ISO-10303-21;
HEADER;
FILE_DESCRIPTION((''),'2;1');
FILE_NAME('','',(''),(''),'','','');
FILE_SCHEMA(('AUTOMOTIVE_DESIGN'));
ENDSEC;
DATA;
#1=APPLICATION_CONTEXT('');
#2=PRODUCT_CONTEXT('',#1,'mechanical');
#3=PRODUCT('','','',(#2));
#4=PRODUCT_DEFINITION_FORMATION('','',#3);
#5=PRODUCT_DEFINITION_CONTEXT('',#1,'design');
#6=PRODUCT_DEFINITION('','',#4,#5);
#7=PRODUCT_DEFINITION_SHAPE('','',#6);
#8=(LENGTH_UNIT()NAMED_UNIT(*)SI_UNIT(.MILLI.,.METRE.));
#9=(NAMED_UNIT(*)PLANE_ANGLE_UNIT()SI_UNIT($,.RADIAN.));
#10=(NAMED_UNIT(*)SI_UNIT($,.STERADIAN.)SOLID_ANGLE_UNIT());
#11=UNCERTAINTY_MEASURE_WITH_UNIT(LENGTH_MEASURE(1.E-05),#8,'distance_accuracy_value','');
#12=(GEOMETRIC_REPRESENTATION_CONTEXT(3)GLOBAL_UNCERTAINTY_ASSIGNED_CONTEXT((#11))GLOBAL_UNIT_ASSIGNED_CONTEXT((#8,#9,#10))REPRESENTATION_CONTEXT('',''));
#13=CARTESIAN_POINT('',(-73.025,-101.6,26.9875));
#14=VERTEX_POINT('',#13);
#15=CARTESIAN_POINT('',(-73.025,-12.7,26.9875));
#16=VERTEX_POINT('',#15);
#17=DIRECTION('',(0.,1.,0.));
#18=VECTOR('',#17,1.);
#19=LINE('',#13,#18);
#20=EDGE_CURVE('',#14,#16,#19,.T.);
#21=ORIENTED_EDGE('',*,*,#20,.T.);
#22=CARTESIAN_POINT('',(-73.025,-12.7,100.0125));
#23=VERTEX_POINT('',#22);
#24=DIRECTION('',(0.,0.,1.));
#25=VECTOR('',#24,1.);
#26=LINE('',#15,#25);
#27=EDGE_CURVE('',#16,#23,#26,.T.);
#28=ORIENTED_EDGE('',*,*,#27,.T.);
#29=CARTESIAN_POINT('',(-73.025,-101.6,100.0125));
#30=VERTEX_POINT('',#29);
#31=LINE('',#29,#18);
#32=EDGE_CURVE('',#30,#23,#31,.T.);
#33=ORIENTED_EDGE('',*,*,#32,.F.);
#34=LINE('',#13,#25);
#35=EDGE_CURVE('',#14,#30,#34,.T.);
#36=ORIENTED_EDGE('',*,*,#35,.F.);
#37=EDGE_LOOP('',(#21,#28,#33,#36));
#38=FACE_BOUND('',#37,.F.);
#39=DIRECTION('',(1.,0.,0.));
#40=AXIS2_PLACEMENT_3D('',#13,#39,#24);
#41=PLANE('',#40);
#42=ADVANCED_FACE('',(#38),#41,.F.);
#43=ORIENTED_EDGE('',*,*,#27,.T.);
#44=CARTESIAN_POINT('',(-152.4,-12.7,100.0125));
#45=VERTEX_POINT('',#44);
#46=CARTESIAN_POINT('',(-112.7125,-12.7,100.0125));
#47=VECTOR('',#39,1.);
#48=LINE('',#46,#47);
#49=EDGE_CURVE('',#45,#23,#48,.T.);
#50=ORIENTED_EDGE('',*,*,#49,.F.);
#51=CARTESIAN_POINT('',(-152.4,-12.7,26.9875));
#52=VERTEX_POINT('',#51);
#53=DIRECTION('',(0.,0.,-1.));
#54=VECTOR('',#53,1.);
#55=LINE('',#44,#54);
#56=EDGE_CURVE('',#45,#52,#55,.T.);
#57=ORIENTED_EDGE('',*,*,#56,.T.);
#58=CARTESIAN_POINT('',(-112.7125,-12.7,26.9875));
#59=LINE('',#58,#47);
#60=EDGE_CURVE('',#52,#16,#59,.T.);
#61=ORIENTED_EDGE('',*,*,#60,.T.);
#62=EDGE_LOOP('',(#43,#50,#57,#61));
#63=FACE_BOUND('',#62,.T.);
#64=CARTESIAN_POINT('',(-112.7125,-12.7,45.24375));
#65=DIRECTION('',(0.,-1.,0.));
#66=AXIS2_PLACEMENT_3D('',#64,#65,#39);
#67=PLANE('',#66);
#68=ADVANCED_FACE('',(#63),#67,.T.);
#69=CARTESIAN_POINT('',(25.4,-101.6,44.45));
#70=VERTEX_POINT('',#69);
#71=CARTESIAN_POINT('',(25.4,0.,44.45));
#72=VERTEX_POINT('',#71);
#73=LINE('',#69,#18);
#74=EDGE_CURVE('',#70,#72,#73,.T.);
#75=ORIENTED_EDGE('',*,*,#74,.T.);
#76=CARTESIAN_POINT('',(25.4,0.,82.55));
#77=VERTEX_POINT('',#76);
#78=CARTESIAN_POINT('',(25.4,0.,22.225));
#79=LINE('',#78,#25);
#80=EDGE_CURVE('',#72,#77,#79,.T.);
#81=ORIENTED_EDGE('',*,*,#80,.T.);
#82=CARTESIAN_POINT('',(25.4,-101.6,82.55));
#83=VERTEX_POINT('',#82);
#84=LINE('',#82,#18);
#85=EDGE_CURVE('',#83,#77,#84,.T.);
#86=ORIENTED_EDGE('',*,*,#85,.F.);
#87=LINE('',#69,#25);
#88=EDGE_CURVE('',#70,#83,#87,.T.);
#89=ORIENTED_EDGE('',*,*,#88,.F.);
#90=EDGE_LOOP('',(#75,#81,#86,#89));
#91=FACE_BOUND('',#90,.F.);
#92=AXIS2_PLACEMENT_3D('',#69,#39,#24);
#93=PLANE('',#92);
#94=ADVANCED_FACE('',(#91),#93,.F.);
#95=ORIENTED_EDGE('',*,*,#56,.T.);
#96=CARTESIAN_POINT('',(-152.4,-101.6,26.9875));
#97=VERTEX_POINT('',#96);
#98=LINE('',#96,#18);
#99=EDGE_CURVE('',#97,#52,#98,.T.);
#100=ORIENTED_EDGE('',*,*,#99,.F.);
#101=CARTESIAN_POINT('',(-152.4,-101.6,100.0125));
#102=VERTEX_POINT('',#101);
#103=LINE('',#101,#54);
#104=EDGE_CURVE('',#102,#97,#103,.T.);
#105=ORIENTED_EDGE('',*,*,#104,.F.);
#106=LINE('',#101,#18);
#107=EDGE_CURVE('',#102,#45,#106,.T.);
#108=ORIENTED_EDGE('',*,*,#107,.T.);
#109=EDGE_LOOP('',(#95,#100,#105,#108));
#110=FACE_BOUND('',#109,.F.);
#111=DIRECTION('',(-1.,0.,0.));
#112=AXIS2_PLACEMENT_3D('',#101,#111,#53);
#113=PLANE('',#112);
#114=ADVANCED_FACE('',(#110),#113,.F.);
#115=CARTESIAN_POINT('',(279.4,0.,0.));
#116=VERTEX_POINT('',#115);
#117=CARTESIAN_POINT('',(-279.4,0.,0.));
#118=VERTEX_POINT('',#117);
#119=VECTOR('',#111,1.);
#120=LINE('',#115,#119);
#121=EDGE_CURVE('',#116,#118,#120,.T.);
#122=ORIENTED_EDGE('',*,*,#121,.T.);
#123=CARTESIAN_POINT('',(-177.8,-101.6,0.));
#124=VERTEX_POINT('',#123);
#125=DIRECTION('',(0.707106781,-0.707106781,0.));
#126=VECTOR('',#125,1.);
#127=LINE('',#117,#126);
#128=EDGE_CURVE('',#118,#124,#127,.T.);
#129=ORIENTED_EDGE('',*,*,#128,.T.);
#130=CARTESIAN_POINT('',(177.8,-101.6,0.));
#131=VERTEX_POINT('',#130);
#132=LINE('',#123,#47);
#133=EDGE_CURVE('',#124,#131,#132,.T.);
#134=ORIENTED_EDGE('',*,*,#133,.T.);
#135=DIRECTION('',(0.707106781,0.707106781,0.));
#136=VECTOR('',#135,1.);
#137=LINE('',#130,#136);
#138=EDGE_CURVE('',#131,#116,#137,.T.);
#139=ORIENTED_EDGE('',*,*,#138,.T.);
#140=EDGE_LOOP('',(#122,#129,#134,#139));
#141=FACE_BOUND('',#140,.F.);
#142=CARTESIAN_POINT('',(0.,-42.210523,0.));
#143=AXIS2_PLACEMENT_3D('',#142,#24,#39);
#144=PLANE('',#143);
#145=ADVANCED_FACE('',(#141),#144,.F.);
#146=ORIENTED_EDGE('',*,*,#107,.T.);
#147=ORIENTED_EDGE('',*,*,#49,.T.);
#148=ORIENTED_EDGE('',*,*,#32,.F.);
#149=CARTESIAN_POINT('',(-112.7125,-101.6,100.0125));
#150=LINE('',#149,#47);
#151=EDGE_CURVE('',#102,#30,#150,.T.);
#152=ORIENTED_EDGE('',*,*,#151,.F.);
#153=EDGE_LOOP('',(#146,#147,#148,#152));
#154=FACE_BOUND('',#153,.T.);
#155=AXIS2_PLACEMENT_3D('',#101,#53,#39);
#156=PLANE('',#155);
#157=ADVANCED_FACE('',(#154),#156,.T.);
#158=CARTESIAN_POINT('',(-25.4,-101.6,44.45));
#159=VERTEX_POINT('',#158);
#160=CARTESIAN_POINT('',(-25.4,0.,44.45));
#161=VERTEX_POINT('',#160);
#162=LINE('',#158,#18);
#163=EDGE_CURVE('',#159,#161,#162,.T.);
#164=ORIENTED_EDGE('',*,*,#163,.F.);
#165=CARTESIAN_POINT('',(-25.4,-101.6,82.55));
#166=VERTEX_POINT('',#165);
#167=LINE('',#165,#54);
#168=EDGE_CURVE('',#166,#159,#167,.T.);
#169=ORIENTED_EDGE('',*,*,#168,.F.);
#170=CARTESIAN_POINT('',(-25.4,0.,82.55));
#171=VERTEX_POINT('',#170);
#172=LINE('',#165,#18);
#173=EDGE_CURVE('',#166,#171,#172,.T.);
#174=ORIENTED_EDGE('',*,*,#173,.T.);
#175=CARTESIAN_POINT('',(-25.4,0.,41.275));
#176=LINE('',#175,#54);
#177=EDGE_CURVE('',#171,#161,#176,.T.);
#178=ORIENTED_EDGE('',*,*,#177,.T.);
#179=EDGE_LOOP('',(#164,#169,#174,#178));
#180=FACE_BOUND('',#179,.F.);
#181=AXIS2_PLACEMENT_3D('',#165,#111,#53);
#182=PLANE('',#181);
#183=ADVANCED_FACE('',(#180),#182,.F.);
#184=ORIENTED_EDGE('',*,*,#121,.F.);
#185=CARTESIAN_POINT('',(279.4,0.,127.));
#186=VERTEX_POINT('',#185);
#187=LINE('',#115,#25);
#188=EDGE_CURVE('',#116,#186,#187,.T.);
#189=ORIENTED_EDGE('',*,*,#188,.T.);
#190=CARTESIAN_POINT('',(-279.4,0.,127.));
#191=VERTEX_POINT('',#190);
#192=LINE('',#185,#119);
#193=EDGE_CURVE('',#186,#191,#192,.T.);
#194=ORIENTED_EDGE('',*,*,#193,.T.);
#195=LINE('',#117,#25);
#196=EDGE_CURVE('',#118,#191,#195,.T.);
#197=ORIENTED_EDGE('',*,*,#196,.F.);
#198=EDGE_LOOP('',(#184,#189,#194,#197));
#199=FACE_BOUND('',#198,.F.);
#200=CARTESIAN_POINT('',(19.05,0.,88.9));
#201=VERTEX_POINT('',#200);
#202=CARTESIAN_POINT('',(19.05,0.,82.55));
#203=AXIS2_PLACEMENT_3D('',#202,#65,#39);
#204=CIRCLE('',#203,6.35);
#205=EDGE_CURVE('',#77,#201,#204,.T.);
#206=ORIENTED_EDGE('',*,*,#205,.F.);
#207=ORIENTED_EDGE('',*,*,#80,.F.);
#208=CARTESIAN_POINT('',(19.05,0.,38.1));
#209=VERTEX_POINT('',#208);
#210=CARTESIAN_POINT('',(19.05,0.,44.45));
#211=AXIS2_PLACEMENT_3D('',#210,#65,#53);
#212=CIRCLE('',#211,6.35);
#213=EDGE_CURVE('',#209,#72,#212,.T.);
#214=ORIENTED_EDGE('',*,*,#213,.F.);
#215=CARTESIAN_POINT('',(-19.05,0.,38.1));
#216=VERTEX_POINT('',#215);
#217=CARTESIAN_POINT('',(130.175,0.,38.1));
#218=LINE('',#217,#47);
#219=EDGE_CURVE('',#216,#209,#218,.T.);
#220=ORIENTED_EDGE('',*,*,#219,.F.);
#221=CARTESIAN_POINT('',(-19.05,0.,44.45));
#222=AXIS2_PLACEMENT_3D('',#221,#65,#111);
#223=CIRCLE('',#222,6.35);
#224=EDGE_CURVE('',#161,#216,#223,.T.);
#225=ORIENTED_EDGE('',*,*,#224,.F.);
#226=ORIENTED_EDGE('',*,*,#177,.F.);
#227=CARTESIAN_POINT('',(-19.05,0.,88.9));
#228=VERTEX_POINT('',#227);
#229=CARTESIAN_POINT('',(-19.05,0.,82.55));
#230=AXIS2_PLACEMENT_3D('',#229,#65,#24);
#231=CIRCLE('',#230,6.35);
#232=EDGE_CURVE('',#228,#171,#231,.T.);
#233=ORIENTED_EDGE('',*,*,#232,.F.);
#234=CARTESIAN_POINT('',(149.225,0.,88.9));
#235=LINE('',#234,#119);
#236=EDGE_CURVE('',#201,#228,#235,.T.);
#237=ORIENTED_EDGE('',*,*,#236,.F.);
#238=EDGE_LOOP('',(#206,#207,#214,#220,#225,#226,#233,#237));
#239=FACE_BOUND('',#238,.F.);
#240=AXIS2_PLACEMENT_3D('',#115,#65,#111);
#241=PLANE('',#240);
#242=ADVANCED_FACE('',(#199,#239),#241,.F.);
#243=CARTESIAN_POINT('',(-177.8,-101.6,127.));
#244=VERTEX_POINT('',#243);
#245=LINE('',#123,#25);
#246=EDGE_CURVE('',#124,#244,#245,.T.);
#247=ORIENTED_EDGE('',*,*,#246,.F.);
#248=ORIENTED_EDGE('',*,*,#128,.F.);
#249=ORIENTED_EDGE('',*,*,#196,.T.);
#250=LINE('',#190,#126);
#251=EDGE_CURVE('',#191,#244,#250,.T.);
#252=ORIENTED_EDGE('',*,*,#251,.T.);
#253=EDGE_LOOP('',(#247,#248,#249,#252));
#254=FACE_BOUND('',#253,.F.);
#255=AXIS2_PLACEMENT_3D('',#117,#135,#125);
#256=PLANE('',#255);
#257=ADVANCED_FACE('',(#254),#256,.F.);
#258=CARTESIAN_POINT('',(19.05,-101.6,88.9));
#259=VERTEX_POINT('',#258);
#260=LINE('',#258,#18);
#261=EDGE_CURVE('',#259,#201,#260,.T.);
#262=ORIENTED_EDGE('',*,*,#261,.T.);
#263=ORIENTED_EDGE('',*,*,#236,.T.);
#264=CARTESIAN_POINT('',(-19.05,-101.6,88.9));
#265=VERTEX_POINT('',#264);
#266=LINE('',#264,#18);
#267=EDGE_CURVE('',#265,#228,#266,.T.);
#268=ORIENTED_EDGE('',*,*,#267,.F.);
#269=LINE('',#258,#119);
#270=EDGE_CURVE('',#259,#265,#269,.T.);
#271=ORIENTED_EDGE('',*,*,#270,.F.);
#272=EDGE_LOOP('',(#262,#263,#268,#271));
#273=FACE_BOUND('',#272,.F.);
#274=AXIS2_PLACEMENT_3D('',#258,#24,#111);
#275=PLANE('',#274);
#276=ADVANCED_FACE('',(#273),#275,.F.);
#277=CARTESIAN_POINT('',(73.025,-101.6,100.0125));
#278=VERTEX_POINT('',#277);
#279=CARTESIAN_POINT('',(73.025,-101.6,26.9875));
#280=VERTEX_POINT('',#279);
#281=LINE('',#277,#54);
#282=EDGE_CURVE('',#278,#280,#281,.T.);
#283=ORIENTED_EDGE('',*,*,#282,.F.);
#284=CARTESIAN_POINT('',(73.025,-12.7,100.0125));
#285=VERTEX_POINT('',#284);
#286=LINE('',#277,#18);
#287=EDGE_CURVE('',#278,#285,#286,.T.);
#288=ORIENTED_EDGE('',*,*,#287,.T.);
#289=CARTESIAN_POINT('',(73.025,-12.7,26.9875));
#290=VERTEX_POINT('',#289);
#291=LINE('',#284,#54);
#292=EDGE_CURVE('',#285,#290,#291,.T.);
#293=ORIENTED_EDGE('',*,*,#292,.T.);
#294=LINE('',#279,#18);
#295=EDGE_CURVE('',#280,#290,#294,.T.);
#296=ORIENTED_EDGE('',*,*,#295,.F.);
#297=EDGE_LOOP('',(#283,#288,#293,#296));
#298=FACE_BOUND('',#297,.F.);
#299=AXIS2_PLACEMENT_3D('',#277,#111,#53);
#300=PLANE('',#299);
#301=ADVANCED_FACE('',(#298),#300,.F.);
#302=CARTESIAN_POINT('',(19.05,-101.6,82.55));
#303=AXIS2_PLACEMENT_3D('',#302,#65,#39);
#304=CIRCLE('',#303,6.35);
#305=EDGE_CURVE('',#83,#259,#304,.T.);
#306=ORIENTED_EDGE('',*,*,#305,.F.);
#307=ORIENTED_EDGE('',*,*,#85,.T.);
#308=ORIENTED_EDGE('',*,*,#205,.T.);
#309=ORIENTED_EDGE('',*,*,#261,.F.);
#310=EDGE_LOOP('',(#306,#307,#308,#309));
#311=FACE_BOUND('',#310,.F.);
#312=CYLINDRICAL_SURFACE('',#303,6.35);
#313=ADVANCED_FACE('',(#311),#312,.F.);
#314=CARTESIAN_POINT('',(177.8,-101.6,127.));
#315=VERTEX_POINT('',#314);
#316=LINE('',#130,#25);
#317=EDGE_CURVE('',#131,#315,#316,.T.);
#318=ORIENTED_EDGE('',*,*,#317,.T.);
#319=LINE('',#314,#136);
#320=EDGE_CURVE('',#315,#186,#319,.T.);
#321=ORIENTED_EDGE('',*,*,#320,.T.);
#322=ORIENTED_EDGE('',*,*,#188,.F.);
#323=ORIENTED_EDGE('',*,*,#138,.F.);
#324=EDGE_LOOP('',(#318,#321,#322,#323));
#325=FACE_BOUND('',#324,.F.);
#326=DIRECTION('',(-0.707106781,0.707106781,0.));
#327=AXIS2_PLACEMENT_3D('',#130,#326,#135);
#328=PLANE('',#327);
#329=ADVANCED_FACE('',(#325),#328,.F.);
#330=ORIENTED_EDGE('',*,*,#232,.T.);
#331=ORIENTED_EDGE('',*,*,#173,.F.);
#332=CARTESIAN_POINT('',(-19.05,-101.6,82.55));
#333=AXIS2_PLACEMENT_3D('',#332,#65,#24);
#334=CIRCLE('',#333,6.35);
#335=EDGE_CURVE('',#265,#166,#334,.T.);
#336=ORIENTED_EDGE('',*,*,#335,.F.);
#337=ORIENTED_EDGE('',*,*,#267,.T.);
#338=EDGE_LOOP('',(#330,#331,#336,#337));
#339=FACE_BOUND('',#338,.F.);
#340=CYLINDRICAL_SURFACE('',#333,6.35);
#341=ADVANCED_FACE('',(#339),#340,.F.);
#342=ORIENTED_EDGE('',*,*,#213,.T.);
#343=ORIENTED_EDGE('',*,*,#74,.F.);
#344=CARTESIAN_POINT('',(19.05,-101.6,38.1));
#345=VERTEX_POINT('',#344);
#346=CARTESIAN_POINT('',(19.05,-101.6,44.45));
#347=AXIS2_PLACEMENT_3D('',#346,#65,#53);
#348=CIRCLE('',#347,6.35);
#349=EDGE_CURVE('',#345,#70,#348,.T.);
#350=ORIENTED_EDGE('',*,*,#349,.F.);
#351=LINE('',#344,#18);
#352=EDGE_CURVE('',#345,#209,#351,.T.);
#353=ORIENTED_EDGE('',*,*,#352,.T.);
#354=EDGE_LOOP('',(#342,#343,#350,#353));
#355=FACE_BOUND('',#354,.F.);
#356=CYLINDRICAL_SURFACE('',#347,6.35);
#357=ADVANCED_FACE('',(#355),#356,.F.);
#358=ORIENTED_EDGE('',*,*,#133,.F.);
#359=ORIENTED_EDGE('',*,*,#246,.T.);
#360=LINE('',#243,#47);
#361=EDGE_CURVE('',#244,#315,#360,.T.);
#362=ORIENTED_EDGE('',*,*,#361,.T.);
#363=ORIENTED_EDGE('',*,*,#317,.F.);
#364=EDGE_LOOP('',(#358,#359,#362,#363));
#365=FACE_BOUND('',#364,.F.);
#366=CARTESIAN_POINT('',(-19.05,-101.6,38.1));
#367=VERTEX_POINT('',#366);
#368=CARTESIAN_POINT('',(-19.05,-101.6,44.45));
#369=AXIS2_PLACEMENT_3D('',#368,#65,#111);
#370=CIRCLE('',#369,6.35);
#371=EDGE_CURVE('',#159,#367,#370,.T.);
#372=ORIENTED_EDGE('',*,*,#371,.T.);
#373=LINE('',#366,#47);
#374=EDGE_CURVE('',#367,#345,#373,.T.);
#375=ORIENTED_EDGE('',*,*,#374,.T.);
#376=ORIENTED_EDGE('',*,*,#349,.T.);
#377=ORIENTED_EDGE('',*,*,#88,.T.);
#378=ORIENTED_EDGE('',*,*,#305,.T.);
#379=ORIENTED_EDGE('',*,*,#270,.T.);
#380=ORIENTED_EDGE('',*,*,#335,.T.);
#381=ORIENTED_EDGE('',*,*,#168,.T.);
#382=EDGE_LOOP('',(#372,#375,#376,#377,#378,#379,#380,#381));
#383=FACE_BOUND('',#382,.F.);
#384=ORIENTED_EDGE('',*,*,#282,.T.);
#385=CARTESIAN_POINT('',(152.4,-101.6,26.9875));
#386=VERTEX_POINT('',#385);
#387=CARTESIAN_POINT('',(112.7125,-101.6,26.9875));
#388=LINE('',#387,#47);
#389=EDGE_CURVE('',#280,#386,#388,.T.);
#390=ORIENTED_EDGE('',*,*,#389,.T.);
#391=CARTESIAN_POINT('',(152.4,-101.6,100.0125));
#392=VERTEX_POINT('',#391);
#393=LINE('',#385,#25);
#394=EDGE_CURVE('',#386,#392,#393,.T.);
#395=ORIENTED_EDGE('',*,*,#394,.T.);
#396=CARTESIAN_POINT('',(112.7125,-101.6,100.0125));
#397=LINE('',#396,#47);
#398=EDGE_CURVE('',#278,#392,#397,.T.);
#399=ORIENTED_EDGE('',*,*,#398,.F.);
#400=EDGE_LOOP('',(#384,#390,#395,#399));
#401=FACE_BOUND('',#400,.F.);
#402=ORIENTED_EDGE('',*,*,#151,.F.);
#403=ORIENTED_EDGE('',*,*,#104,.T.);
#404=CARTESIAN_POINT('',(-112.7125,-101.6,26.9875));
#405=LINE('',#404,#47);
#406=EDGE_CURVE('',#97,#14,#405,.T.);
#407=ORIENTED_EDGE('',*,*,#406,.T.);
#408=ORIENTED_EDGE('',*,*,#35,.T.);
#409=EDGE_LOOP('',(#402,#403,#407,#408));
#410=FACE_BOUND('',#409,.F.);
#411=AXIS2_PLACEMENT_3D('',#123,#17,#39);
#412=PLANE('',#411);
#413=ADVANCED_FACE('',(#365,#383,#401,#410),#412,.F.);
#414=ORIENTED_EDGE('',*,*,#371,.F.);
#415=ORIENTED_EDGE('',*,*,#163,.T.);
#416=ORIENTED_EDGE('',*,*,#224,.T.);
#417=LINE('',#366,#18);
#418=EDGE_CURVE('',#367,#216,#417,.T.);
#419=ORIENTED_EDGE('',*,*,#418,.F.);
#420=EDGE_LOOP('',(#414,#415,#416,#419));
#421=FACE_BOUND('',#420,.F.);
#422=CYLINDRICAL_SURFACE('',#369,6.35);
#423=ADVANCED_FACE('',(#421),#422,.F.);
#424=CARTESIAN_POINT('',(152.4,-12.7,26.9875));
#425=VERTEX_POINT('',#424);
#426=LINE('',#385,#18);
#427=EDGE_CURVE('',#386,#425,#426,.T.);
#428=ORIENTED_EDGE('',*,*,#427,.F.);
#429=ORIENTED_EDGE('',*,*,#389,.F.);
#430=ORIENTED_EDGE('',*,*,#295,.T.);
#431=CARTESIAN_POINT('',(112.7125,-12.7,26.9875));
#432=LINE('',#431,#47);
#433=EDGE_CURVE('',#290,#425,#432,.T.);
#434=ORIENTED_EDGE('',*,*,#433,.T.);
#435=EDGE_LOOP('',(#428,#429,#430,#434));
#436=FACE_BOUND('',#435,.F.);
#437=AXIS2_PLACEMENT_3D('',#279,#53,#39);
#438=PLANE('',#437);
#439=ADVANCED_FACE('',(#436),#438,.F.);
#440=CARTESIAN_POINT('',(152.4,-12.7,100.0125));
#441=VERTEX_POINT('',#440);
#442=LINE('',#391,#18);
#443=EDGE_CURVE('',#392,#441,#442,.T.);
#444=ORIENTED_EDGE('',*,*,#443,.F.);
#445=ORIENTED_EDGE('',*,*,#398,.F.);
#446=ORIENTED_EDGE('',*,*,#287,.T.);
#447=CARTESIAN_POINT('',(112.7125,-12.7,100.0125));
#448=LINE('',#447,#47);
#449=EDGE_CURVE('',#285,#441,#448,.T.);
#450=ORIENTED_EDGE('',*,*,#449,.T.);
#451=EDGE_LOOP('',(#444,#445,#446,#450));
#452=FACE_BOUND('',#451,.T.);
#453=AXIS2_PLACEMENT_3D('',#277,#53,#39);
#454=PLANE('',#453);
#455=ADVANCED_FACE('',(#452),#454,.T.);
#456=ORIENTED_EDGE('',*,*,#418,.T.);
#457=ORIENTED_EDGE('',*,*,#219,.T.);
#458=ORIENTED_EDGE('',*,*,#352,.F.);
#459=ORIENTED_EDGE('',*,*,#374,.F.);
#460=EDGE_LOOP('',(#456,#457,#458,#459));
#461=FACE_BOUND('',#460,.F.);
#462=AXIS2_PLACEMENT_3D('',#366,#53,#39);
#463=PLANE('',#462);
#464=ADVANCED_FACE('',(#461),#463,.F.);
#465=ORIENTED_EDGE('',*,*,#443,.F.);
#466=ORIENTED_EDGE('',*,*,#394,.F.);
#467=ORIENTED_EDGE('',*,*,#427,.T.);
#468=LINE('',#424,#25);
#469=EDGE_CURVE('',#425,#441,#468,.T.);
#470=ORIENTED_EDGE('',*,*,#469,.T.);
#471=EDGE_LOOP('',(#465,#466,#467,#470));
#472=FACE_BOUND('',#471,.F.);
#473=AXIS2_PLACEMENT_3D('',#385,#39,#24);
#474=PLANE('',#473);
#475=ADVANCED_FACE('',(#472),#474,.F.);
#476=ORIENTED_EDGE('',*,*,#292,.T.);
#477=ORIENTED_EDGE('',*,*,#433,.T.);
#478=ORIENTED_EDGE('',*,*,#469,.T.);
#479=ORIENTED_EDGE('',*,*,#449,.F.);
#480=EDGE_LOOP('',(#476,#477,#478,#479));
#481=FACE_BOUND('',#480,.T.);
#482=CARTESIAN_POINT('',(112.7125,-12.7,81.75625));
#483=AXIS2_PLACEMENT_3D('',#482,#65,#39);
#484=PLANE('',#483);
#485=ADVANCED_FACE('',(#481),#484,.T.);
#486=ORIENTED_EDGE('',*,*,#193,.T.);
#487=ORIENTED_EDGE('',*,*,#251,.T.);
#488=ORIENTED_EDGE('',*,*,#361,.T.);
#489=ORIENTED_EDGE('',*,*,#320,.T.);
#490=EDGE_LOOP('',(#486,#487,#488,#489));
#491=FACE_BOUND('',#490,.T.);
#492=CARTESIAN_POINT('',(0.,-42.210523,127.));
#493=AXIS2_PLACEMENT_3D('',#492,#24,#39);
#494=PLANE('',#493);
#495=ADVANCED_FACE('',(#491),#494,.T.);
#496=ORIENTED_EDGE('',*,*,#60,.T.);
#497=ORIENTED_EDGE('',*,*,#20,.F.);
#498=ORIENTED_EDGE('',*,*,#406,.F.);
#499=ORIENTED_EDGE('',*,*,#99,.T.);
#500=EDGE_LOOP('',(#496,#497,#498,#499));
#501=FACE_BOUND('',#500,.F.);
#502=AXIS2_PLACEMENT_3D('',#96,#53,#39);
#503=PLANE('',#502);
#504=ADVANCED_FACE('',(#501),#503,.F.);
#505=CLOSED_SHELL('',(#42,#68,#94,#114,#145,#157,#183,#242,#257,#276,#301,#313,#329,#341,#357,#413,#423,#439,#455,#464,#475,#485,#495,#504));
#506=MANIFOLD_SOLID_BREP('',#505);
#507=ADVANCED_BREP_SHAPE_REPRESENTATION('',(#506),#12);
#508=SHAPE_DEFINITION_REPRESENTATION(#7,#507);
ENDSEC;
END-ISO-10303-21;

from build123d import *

# Parameters (mm, degrees)
F1_DEPTH = 127
F3_DEPTH = 101.601
F4_W     = 79.375
F4_H     = 36.5125
F5_DEPTH = 88.9


# Not quite as in the source:
# - a feature names something its author has since deleted; it is built from what else it names


with BuildPart() as f1:
    # F0 (on Top) → F1 (new body)
    with BuildSketch(Plane.XY):
        Polygon((177.8, 0), (-177.8, 0), (-279.4, 0), (-177.8, -101.6), (177.8, -101.6), (279.4, 0), align=None)
    extrude(amount=F1_DEPTH)

    # F2 (on face) → F3 (cut, through all)
    with BuildSketch(Plane.XZ.offset(101.6)):
        with BuildLine():
            Line((19.05, 88.9), (-19.05, 88.9))
            ThreePointArc((-19.05, 88.9), (-23.5401280605, 87.0401280605), (-25.4, 82.55))
            Line((-25.4, 82.55), (-25.4, 44.45))
            ThreePointArc((-25.4, 44.45), (-23.5401280605, 39.9598719395), (-19.05, 38.1))
            Line((-19.05, 38.1), (19.05, 38.1))
            ThreePointArc((19.05, 38.1), (23.5401280605, 39.9598719395), (25.4, 44.45))
            Line((25.4, 44.45), (25.4, 82.55))
            ThreePointArc((25.4, 82.55), (23.5401280605, 87.0401280605), (19.05, 88.9))
        make_face()
    extrude(amount=-F3_DEPTH, mode=Mode.SUBTRACT)

    # F4 (on face) → F5 (cut)
    with BuildSketch(Plane.XZ.offset(101.6)):
        with Locations((-112.7125, 45.24375)):
            Rectangle(F4_W, F4_H)
        with Locations((-112.7125, 81.75625)):
            Rectangle(F4_W, F4_H)
        with Locations((112.7125, 81.75625)):
            Rectangle(F4_W, F4_H)
        with Locations((112.7125, 45.24375)):
            Rectangle(F4_W, F4_H)
    extrude(amount=-F5_DEPTH, mode=Mode.SUBTRACT)


solid = f1.part
